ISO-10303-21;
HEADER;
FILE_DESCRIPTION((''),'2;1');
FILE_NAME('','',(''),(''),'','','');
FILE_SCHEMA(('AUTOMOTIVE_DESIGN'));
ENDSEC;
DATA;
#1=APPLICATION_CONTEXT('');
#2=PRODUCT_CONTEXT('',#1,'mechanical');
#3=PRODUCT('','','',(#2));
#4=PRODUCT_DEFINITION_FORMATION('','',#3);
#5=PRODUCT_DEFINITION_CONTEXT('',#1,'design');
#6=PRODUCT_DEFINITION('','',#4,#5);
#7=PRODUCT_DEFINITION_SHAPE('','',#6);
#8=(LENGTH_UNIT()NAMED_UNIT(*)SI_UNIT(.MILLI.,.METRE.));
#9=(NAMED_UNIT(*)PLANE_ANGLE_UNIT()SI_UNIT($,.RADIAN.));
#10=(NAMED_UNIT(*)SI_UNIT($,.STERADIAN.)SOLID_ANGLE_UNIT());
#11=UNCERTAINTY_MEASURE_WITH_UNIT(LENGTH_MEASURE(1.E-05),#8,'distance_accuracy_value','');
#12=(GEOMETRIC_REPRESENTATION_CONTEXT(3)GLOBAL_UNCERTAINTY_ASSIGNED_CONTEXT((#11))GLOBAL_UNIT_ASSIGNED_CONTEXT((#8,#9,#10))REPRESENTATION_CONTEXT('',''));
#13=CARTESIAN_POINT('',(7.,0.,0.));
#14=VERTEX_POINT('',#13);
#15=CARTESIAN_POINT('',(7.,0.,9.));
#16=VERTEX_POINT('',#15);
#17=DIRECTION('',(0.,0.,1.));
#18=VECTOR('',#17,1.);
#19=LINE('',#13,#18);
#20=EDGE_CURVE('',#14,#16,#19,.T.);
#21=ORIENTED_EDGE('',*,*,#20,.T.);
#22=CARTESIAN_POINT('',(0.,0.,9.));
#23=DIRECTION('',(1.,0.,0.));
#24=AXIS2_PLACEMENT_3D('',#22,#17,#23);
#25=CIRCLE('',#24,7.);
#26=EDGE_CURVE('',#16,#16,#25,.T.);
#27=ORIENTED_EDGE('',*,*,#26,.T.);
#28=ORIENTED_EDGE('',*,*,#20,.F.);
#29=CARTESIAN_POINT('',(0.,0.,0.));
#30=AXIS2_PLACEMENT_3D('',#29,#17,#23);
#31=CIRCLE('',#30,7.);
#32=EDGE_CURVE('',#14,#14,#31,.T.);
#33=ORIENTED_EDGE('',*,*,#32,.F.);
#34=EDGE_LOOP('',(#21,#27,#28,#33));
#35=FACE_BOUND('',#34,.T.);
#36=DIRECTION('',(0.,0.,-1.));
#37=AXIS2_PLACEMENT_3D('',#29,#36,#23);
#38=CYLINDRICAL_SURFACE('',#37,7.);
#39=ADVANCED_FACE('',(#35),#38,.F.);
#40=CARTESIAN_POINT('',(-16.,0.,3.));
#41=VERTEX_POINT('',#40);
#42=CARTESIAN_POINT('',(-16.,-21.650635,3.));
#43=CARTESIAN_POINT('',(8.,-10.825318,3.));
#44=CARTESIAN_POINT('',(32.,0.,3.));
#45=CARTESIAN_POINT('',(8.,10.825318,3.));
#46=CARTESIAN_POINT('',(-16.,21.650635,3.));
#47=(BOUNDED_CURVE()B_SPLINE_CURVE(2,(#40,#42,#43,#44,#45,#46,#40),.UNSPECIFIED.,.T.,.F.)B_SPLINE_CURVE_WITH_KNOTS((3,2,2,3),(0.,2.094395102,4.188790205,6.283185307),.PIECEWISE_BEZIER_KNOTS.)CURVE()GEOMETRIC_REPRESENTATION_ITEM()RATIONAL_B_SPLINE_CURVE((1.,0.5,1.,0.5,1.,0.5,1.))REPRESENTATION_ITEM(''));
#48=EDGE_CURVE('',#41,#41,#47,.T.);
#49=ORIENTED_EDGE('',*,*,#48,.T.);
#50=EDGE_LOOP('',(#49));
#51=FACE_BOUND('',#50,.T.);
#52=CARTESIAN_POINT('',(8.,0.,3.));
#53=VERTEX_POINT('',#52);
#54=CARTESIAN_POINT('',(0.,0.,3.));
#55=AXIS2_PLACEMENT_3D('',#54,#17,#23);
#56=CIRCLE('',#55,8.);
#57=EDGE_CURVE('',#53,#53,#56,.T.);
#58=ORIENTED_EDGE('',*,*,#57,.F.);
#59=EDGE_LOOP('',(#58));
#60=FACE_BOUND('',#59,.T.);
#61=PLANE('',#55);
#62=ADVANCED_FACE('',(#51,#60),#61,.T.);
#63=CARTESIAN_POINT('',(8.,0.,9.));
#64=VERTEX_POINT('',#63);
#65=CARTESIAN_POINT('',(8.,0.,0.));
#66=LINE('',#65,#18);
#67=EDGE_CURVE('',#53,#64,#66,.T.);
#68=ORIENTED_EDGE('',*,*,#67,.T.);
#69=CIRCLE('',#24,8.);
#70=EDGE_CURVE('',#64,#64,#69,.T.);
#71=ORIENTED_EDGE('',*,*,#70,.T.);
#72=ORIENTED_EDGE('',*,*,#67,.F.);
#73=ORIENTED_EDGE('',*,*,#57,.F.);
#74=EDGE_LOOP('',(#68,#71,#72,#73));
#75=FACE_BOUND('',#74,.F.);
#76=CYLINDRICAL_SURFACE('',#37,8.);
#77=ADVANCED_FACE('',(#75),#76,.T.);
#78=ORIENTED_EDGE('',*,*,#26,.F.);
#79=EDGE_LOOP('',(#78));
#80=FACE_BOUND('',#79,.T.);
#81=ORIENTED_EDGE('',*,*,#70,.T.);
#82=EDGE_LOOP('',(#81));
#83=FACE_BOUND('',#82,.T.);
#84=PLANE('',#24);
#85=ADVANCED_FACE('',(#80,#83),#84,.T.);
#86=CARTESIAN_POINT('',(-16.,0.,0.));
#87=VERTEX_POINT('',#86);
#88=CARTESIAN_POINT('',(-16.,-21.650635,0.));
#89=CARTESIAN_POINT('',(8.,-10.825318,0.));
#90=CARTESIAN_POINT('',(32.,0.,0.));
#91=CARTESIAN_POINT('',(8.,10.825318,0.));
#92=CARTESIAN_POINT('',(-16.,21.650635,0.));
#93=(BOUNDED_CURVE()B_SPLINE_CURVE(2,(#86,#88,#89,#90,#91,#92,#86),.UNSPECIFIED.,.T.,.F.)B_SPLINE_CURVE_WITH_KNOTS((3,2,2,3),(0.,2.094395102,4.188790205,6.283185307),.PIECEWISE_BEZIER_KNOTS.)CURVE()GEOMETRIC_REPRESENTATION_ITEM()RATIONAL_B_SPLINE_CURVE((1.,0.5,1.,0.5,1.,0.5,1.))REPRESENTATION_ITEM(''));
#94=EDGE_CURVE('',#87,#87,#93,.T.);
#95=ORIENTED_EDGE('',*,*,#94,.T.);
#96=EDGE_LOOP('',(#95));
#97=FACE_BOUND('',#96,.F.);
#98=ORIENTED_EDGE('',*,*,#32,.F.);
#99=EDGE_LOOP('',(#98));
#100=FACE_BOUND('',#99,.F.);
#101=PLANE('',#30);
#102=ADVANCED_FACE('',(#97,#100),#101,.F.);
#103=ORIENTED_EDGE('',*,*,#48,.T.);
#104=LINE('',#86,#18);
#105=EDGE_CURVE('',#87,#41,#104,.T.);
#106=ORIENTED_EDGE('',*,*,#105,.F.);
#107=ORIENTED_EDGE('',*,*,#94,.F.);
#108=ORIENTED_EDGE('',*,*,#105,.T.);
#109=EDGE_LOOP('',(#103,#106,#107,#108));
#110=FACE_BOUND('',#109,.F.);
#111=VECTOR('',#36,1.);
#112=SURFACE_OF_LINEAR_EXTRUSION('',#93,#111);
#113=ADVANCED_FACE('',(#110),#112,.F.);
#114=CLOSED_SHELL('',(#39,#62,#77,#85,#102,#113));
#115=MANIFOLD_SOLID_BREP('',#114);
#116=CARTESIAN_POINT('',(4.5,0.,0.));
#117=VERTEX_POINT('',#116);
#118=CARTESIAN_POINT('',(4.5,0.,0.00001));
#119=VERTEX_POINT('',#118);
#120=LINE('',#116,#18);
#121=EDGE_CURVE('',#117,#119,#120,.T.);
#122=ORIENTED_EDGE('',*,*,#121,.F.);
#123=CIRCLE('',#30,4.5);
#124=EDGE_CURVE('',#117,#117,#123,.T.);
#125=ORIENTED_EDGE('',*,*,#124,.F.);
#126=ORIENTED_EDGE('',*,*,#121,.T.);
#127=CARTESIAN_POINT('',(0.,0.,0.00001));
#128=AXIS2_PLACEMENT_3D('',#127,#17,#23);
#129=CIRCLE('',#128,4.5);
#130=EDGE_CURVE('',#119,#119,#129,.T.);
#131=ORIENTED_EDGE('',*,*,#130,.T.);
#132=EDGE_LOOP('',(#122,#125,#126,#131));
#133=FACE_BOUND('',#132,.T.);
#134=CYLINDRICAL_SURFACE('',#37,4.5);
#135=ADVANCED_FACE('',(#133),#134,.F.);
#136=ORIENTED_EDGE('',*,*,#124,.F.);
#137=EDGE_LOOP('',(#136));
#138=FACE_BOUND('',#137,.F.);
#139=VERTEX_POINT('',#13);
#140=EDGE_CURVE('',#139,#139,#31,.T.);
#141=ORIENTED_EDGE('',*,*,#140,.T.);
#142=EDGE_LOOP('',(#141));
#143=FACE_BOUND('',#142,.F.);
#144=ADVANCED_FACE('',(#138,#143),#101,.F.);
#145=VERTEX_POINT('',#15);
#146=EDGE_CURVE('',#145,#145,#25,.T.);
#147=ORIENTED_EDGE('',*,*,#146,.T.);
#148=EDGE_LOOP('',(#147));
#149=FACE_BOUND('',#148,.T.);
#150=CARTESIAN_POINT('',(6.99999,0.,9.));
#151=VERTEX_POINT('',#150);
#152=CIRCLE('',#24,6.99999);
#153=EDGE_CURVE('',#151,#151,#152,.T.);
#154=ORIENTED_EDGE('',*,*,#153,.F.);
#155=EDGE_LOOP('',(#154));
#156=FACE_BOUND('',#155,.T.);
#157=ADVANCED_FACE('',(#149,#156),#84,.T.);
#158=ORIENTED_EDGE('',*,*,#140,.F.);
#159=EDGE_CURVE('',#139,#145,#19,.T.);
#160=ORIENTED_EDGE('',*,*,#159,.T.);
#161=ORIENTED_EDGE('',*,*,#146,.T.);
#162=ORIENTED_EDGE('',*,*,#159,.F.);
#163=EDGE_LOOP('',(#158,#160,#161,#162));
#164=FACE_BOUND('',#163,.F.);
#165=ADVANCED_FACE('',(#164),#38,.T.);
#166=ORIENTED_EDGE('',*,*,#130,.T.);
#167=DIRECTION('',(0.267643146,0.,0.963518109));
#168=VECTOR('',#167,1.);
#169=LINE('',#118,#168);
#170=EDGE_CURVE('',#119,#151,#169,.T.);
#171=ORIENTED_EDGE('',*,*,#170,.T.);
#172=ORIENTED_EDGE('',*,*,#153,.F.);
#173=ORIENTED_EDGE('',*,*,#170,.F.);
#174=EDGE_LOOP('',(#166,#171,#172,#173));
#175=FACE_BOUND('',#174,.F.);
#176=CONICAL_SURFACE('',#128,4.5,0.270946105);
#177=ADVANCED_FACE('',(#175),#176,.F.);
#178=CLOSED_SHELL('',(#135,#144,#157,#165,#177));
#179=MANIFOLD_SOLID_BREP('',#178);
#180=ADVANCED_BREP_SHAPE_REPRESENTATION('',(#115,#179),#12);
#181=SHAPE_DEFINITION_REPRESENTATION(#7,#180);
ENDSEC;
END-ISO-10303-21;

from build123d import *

# Parameters (mm, degrees)
F0_R     = 8
F1_DEPTH = 3
F0_R_2   = 7
F2_DEPTH = 9
F0_R_3   = 4.5
F3_DEPTH = 9
F4_DEPTH = 25
F5_SIZE2 = 2.49999
F5_SIZE  = 8.99999


# Not quite as in the source:
# - a fillet or chamfer is up to 0.001 mm smaller than in the source, because OpenCascade refuses the exact size


with BuildPart() as f1:
    # F0 (on Top) → F1 (new body)
    with BuildSketch(Plane.XY):
        with BuildLine():
            add(Edge.make_bspline(
                [(-16, 0), (-16, -21.6506350946), (8, -10.8253175473), (32, 0), (8, 10.8253175473), (-16, 21.6506350946), (-16, 0)],
                knots=[0, 0, 0, 2.0943951024, 2.0943951024, 4.1887902048, 4.1887902048, 6.2831853072, 6.2831853072, 6.2831853072], degree=2, weights=[1, 0.5, 1, 0.5, 1, 0.5, 1]))
        make_face()
        Circle(F0_R, mode=Mode.SUBTRACT)
    extrude(amount=F1_DEPTH)

    # F0 (on Top) → F2 (join)
    with BuildSketch(Plane.XY):
        Circle(F0_R)
        Circle(F0_R_2, mode=Mode.SUBTRACT)
    extrude(amount=F2_DEPTH)

    # F0 (on Top) → F4 (cut)
    with BuildSketch(Plane.XY):
        Circle(F0_R_3)
    extrude(amount=-F4_DEPTH, mode=Mode.SUBTRACT)


with BuildPart() as f3:
    # F0 (on Top) → F3 (new body, through all)
    with BuildSketch(Plane.XY):
        Circle(F0_R_2)
        Circle(F0_R_3, mode=Mode.SUBTRACT)
    extrude(amount=F3_DEPTH)

    # F5 (size 9 and 2.5 in the source; OpenCascade refuses exactly that, so slightly less here)
    f5_edges = [f3.edges().sort_by_distance(p)[0] for p in [
        (-4.5, 0, 9),
    ]]
    f5_side = f3.faces().sort_by_distance((-4.5, 0, 4.5))[0]
    chamfer(f5_edges, length=F5_SIZE, length2=F5_SIZE2, reference=f5_side)


solid = Compound([f1.part, f3.part])
